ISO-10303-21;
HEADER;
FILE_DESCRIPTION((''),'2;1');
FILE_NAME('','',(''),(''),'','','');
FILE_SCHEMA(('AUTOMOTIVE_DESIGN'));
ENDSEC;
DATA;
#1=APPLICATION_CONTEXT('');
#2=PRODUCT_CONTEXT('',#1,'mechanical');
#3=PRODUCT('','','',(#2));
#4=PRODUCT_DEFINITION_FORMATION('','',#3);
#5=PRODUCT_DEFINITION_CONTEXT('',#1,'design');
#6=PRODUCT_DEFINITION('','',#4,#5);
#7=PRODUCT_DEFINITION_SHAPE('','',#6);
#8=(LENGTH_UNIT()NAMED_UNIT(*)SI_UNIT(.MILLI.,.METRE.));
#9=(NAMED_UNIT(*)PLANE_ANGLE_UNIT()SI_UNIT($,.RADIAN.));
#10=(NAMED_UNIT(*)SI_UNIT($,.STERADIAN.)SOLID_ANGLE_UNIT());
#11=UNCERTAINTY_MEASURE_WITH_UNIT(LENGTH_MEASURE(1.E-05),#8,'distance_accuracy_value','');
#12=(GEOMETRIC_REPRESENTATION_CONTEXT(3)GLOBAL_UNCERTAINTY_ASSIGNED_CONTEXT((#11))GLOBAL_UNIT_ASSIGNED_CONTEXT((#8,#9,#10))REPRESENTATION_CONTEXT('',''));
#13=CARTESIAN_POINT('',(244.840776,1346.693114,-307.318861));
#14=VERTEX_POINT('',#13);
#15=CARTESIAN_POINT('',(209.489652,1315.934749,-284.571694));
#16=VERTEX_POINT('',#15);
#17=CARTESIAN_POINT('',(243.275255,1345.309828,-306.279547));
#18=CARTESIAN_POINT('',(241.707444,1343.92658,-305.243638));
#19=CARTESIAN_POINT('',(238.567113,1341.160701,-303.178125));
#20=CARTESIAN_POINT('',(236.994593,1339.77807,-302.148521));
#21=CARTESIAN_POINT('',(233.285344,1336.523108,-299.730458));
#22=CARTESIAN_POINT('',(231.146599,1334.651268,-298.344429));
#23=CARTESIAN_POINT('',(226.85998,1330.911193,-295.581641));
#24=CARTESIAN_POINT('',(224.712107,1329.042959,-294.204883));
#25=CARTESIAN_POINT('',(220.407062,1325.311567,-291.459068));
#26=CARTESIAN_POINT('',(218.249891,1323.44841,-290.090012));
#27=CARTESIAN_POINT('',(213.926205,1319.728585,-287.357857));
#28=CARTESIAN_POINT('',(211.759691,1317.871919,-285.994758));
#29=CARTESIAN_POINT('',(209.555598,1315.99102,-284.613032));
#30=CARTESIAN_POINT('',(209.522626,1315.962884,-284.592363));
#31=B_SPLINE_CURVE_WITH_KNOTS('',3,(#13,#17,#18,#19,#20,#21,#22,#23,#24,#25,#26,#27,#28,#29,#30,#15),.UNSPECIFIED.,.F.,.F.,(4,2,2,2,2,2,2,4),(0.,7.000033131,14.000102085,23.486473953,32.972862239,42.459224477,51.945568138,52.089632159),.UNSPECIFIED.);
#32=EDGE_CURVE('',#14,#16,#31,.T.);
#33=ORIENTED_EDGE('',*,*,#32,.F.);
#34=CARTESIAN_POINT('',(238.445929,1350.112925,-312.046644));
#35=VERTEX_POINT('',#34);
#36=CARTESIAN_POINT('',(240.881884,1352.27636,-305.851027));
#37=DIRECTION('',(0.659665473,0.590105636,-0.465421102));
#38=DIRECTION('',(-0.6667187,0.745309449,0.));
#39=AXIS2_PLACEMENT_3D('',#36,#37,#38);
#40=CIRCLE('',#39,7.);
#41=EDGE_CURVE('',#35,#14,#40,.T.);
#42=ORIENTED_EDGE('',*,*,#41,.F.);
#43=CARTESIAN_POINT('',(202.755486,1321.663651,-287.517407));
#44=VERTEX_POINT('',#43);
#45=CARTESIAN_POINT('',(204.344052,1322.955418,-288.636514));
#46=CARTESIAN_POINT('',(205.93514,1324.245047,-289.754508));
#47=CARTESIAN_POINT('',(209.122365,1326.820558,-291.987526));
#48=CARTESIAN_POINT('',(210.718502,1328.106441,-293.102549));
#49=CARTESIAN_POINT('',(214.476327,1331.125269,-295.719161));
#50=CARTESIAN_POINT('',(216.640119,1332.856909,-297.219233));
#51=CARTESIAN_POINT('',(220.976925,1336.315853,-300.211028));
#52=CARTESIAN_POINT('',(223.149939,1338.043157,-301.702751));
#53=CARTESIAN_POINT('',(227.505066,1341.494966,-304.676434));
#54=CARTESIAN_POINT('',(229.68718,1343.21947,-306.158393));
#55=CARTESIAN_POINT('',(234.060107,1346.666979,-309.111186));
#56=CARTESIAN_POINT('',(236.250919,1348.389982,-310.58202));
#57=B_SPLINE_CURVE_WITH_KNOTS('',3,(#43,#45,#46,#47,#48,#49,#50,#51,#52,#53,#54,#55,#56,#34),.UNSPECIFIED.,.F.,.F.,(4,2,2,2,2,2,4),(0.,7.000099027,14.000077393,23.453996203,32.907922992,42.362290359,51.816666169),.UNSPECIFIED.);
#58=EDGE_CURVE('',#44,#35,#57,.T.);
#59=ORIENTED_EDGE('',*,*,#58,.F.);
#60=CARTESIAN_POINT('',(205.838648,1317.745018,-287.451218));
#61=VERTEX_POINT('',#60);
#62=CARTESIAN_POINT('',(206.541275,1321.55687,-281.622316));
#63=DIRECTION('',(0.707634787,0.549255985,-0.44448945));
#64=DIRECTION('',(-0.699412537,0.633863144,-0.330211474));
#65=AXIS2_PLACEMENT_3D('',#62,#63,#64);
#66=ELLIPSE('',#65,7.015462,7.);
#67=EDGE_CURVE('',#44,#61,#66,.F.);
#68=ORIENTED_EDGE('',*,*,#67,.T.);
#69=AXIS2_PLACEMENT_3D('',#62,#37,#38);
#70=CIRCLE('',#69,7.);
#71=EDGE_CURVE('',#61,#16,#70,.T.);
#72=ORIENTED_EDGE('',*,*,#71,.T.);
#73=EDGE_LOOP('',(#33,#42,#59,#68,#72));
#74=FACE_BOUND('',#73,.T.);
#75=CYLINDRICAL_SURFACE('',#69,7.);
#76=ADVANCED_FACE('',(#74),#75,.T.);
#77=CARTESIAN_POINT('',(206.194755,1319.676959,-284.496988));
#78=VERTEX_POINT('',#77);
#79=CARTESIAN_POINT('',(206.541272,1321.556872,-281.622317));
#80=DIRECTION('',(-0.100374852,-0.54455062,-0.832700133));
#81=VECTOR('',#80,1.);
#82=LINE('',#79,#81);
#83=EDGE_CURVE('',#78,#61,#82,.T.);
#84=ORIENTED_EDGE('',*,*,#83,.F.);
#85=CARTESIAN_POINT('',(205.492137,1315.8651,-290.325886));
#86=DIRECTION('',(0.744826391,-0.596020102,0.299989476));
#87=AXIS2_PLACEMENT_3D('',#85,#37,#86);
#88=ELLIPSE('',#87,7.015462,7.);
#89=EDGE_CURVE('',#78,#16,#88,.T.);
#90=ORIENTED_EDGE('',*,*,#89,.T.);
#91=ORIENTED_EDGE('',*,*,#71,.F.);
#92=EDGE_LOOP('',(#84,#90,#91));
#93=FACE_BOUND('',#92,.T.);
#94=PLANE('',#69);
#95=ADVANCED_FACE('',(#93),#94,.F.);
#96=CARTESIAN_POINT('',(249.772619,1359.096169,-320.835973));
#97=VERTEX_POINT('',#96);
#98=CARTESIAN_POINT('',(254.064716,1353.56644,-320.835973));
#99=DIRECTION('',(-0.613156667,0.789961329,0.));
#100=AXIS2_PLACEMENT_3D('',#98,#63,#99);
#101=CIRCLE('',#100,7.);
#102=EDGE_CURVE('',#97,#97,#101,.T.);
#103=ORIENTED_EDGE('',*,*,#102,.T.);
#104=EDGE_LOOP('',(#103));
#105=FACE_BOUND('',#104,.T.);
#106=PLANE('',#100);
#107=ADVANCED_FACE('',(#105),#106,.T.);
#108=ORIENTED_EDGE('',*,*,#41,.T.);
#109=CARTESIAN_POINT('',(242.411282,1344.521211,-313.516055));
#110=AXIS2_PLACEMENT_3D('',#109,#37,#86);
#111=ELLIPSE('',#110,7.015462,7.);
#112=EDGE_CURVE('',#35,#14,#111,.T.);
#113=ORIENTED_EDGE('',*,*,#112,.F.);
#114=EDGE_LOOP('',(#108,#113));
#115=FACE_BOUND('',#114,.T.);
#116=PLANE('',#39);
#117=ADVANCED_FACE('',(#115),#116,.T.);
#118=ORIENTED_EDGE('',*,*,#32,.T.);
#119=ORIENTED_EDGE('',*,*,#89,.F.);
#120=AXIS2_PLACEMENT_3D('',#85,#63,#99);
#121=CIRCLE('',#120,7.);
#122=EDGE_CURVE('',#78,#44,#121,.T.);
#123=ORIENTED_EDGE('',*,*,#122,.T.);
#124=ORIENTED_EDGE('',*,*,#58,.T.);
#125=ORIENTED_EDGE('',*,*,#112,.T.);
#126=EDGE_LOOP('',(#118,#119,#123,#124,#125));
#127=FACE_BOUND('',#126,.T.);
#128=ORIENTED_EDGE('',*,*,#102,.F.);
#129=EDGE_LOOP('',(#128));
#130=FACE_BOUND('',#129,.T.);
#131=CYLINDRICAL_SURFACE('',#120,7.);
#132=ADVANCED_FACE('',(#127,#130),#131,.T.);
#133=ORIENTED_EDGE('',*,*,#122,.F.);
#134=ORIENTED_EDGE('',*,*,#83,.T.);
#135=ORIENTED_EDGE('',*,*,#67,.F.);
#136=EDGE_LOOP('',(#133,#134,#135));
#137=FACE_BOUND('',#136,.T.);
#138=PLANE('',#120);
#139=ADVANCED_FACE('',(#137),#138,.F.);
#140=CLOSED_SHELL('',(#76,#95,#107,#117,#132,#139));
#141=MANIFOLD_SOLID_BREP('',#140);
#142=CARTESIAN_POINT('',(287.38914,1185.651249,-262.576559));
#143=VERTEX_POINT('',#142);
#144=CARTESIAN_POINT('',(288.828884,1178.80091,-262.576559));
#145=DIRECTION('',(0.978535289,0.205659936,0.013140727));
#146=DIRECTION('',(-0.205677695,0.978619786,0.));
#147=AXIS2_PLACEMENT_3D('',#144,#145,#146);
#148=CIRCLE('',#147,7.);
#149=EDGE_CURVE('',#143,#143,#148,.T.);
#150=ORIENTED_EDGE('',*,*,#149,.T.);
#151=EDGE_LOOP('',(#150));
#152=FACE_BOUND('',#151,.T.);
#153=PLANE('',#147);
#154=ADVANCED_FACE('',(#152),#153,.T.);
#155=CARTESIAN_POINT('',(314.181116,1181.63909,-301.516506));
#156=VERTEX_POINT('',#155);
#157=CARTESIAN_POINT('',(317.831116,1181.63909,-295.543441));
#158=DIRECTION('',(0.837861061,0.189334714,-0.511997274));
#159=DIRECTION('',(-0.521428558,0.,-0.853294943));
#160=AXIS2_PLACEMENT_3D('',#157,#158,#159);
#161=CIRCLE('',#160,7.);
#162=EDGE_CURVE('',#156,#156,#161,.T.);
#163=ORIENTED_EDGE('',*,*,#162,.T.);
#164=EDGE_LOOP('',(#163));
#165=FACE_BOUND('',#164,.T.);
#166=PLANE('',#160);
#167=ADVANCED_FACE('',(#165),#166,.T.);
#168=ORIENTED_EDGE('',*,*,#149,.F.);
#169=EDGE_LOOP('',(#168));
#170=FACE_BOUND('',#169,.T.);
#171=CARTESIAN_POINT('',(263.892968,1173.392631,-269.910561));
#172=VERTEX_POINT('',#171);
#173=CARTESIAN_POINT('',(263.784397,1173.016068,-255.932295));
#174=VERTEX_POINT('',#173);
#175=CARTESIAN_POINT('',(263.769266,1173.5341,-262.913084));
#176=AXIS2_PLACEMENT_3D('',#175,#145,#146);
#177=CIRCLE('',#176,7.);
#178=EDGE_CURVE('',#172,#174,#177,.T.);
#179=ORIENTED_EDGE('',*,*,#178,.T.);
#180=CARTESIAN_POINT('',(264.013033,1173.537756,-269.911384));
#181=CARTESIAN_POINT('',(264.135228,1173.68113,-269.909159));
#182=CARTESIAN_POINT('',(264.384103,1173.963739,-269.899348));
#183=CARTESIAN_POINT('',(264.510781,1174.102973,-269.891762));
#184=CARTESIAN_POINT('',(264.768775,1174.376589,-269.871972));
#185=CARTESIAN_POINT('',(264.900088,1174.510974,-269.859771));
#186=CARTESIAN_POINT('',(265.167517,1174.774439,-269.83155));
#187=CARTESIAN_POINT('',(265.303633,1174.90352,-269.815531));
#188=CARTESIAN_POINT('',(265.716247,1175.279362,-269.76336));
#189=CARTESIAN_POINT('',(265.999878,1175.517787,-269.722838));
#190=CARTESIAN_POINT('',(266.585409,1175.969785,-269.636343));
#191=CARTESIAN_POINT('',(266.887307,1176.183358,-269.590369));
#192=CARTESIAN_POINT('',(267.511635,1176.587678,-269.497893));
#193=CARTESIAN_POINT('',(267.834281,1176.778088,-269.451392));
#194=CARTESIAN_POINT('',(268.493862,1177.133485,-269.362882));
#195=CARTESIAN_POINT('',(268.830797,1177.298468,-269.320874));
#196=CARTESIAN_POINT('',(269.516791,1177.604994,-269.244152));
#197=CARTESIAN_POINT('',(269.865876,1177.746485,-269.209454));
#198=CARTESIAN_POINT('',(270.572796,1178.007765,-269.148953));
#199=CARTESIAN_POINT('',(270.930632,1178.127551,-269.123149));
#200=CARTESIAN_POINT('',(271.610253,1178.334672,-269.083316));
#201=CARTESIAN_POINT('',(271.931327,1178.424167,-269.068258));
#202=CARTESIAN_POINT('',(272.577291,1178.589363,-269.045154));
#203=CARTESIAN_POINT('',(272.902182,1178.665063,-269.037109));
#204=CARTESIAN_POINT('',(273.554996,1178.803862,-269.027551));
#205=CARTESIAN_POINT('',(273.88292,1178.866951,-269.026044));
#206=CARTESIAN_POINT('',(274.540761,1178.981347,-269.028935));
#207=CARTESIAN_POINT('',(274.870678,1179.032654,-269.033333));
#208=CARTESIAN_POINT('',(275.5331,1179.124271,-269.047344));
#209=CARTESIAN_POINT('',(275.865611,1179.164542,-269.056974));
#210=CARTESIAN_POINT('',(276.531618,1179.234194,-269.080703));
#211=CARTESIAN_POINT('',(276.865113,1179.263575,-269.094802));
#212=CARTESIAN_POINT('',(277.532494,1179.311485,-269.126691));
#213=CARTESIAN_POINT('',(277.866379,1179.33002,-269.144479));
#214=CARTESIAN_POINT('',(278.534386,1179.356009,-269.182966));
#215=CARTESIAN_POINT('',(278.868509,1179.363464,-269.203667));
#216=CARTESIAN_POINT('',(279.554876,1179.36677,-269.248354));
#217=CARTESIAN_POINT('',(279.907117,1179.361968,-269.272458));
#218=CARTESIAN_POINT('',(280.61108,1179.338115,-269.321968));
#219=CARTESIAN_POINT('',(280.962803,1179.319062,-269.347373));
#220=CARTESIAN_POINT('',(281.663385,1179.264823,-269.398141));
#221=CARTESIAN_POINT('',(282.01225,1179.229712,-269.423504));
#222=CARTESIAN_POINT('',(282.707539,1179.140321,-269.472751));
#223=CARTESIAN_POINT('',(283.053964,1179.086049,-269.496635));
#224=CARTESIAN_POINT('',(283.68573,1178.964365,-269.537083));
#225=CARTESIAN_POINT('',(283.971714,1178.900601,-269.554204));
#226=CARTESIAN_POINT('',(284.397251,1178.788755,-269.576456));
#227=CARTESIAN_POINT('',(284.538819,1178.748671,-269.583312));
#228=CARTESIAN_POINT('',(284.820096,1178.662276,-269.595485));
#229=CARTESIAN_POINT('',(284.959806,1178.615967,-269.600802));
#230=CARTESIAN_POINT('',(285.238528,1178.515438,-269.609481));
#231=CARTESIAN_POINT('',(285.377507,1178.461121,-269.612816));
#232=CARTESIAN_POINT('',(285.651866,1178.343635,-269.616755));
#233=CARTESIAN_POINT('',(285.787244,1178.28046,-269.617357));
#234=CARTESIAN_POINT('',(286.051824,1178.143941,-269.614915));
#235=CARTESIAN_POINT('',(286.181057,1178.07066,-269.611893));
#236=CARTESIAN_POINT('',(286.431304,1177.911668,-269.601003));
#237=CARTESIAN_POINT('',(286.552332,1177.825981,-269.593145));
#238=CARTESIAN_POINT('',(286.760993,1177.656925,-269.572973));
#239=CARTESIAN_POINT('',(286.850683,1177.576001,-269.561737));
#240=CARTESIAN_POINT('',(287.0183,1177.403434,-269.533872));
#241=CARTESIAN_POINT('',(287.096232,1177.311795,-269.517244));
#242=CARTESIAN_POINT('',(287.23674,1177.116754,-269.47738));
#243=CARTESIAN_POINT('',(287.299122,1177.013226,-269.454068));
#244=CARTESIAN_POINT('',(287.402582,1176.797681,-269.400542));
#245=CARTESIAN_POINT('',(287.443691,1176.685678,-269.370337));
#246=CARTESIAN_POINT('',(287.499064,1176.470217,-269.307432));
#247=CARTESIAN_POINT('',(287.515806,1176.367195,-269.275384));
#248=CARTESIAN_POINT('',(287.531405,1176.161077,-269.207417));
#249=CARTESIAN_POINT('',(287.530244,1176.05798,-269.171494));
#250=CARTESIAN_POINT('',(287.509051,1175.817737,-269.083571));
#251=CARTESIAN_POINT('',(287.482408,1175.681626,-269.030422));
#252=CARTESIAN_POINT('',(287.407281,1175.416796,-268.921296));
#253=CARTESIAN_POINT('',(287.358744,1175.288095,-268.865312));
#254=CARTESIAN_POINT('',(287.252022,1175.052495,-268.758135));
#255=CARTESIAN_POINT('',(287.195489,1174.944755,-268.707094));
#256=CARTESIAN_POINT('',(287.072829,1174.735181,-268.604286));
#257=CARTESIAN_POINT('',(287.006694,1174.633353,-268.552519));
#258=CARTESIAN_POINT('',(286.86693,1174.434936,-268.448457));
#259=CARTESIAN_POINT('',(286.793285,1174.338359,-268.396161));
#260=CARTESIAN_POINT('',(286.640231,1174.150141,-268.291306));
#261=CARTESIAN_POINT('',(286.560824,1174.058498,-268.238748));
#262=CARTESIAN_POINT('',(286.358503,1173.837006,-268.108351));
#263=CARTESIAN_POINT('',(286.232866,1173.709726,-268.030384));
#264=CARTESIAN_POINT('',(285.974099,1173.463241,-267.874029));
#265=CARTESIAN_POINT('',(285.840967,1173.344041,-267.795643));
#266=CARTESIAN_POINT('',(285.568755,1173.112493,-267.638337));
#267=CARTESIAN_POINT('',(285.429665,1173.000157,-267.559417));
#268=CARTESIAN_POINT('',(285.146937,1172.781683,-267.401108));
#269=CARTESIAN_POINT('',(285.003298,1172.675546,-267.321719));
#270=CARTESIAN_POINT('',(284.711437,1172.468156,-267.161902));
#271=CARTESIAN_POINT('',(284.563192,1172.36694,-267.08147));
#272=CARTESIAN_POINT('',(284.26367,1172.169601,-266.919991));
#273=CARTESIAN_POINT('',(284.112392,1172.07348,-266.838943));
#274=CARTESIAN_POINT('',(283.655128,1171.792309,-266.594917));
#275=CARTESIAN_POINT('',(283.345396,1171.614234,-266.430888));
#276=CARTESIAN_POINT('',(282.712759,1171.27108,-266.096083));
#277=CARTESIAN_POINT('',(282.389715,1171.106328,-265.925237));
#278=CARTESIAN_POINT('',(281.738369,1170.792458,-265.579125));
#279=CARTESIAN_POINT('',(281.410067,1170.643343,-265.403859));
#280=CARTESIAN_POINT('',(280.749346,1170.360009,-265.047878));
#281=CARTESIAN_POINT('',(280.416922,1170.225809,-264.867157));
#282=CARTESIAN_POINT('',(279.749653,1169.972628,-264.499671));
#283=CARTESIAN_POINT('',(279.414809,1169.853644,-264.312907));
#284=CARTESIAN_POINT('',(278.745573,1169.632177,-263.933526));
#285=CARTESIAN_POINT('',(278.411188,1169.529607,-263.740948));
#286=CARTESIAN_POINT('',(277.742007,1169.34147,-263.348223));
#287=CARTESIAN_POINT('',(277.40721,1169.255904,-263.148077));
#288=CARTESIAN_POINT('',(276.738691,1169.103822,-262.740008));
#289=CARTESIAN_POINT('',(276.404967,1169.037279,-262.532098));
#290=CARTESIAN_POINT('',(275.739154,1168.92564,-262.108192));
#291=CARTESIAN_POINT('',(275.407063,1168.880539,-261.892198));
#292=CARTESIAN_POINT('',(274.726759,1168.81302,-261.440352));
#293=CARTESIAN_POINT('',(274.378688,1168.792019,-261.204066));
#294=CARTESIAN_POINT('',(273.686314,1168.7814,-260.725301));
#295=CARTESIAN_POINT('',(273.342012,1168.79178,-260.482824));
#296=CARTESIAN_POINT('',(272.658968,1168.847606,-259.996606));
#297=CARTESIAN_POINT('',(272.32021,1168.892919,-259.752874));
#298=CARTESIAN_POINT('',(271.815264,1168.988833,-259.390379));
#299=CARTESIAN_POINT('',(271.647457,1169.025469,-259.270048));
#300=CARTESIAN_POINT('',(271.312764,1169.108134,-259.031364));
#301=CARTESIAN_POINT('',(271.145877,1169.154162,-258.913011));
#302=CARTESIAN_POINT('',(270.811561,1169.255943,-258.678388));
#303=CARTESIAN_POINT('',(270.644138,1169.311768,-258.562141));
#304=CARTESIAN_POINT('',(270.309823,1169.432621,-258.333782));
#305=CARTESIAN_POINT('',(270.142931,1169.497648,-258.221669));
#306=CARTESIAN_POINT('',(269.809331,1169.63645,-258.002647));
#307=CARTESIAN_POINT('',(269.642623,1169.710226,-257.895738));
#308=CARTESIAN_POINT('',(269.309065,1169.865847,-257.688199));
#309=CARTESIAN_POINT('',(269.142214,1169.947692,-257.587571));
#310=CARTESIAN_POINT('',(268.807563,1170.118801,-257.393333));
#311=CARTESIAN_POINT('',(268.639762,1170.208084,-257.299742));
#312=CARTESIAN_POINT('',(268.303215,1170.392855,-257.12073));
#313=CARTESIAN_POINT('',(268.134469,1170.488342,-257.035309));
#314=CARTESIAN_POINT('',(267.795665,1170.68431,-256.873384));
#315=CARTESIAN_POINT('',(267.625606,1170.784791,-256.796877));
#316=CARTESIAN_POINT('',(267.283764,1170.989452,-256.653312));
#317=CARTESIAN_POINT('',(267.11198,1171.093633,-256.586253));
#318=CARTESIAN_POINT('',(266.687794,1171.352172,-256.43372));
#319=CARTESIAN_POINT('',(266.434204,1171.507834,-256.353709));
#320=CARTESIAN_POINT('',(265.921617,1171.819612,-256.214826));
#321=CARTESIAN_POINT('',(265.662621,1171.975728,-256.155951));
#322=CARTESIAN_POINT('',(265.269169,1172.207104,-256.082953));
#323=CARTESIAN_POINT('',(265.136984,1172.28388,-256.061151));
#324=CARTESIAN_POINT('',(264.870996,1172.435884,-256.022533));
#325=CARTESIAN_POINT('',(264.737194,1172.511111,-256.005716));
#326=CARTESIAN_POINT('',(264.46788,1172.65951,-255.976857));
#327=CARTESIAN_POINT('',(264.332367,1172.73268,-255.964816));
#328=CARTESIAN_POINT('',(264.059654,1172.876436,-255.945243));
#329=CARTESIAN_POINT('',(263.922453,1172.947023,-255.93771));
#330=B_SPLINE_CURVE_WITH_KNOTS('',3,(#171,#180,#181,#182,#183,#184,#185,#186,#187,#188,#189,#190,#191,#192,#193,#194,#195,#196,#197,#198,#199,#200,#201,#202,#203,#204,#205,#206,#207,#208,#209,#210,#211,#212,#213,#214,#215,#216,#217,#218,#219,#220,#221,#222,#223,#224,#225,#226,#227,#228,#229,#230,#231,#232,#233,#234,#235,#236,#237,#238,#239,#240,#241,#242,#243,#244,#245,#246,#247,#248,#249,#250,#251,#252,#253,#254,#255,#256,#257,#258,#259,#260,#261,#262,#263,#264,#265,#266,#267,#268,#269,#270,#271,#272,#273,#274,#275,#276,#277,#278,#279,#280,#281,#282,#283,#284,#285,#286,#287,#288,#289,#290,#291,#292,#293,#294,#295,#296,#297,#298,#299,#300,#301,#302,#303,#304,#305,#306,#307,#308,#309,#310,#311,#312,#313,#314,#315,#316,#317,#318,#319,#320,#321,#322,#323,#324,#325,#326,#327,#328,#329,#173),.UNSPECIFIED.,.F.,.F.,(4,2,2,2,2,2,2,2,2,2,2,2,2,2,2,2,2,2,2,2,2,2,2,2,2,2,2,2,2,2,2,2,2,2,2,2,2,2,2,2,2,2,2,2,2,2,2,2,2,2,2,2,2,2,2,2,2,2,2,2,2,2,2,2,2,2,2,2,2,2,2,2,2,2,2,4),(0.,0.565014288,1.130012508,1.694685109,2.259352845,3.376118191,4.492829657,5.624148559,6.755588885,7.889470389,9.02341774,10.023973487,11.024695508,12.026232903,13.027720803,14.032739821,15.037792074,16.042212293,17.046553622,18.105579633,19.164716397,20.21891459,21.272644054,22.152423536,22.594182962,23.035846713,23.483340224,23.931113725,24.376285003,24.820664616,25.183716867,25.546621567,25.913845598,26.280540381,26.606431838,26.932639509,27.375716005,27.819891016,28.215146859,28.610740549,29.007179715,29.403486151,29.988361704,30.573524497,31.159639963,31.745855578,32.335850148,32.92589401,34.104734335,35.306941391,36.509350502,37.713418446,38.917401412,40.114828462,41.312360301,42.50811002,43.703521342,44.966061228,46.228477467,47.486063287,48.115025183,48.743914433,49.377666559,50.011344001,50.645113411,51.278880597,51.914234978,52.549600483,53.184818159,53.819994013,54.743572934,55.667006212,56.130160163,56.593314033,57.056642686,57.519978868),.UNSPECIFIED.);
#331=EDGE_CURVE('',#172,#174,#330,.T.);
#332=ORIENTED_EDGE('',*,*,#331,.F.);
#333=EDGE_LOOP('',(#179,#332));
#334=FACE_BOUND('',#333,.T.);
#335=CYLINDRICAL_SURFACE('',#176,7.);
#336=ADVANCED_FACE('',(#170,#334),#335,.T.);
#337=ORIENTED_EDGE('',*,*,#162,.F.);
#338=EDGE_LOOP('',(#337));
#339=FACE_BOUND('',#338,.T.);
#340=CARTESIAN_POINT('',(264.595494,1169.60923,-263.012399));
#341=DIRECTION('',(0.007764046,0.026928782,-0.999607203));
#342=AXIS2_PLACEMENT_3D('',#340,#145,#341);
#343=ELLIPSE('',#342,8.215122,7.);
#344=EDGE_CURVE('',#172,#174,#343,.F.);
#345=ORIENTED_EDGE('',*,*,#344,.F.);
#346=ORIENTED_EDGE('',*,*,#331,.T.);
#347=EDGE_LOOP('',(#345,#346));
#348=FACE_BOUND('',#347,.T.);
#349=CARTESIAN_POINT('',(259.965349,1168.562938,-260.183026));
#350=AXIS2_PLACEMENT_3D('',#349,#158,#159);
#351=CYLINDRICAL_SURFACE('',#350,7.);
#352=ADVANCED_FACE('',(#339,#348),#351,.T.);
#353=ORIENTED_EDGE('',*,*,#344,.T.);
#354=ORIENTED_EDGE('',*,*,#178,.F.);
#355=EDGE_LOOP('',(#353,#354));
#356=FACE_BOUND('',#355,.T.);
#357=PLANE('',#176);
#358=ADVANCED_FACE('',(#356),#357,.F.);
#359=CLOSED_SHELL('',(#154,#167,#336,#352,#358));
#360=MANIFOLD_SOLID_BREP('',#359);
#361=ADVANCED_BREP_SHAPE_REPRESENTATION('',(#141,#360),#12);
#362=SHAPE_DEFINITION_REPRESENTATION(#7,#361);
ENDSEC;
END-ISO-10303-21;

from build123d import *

# Parameters (mm, degrees)
SUSP_RR_ROCKER_BRACKET_A_PROFILE_R   = 7
SUSP_RR_ROCKER_BRACKET_B_START       = 582.103316114
SUSP_RR_ROCKER_BRACKET_B_OUTLINE_R   = 7
SUSP_RR_ROCKER_BRACKET_B_DEPTH       = 59.237735171
SUSP_RR_ROCKER_BRACKET_B_START_2     = 573.503727818
SUSP_RR_ROCKER_BRACKET_B_2_OUTLINE_R = 7
SUSP_RR_ROCKER_BRACKET_B_2_DEPTH     = 8.599588296
SUSP_RR_ROCKER_BRACKET_B_START_3     = 488
SUSP_RR_ROCKER_BRACKET_B_3_OUTLINE_W = 17
SUSP_RR_ROCKER_BRACKET_B_3_OUTLINE_H = 18
SUSP_RR_ROCKER_BRACKET_B_3_DEPTH     = 8.001614425
SUSP_RR_COILOVER_BRACKET_A_PROFILE_R = 7
SUSP_RR_COILOVER_BRACKET_B_PROFILE_R = 7


with BuildPart() as part:
    # SUSP_RR_rocker_bracket_a: sweep along a curve in space
    with BuildLine() as susp_rr_rocker_bracket_a_path:
        Line((263.769266, 1173.5341, -262.913084), (288.828884, 1178.80091, -262.576559))
    # SUSP_RR_rocker_bracket_a profile (on start of the path) → SUSP_RR_rocker_bracket_a (sweep)
    with BuildSketch(Plane(origin=(263.769266, 1173.5341, -262.913084), x_dir=(-0.20567769530184105, 0.9786197860534618, 0), z_dir=(0.9785352890118953, 0.2056599364571734, 0.013140726571920548))):
        Circle(SUSP_RR_ROCKER_BRACKET_A_PROFILE_R)
    sweep(path=susp_rr_rocker_bracket_a_path.line)

    # SUSP_RR_rocker_bracket_b: read off the stored shape, not the designer's step
    # SUSP_RR_rocker_bracket_b outline → SUSP_RR_rocker_bracket_b (add)
    with BuildSketch(Plane(origin=(0, 0, 0), x_dir=(0.5458835432361197, -0.29060444522986084, 0.7858499943606441), z_dir=(0.837861060811385, 0.189334713906647, -0.51199727429539)).offset(SUSP_RR_ROCKER_BRACKET_B_START)):
        with Locations((-402.143607902, -1005.781118034)):
            Circle(SUSP_RR_ROCKER_BRACKET_B_OUTLINE_R)
    extrude(amount=SUSP_RR_ROCKER_BRACKET_B_DEPTH)

    # SUSP_RR_rocker_bracket_b 2 outline → SUSP_RR_rocker_bracket_b 2 (add)
    with BuildSketch(Plane(origin=(0, 0, 0), x_dir=(0.5458835432361197, -0.29060444522986084, 0.7858499943606441), z_dir=(0.837861060811385, 0.189334713906647, -0.51199727429539)).offset(SUSP_RR_ROCKER_BRACKET_B_START_2)):
        with Locations((-402.143607902, -1005.781118034)):
            Circle(SUSP_RR_ROCKER_BRACKET_B_2_OUTLINE_R)
    extrude(amount=SUSP_RR_ROCKER_BRACKET_B_2_DEPTH)

    # SUSP_RR_rocker_bracket_b 3 outline → SUSP_RR_rocker_bracket_b 3 (cut)
    with BuildSketch(Plane(origin=(0, 0, 0), x_dir=(-0.20564139487715902, 0.9786235182829146, -0.0027615532850912184), z_dir=(0.9785352890118946, 0.2056599364571769, 0.013140726571917593)).offset(SUSP_RR_ROCKER_BRACKET_B_START_3)):
        with Locations((1090.5, -266)):
            Rectangle(SUSP_RR_ROCKER_BRACKET_B_3_OUTLINE_W, SUSP_RR_ROCKER_BRACKET_B_3_OUTLINE_H)
    extrude(amount=SUSP_RR_ROCKER_BRACKET_B_3_DEPTH, mode=Mode.SUBTRACT)


with BuildPart() as body_2:
    # SUSP_RR_coilover_bracket_a: sweep along a curve in space
    with BuildLine() as susp_rr_coilover_bracket_a_path:
        Line((206.541275, 1321.55687, -281.622316), (240.881884, 1352.27636, -305.851027))
    # SUSP_RR_coilover_bracket_a profile (on start of the path) → SUSP_RR_coilover_bracket_a (sweep)
    with BuildSketch(Plane(origin=(206.541275, 1321.55687, -281.622316), x_dir=(-0.6667186997086567, 0.7453094494629717, 0), z_dir=(0.6596654729611602, 0.5901056355749471, -0.46542110249280333))):
        Circle(SUSP_RR_COILOVER_BRACKET_A_PROFILE_R)
    sweep(path=susp_rr_coilover_bracket_a_path.line)

    # SUSP_RR_coilover_bracket_b: sweep along a curve in space
    with BuildLine() as susp_rr_coilover_bracket_b_path:
        Line((205.492137, 1315.8651, -290.325886), (254.064716, 1353.56644, -320.835973))
    # SUSP_RR_coilover_bracket_b profile (on start of the path) → SUSP_RR_coilover_bracket_b (sweep)
    with BuildSketch(Plane(origin=(205.492137, 1315.8651, -290.325886), x_dir=(-0.6131566671765795, 0.7899613291148557, 0), z_dir=(0.7076347872393257, 0.5492559847303456, -0.44448944996102296))):
        Circle(SUSP_RR_COILOVER_BRACKET_B_PROFILE_R)
    sweep(path=susp_rr_coilover_bracket_b_path.line)


solid = Compound([part.part, body_2.part])
